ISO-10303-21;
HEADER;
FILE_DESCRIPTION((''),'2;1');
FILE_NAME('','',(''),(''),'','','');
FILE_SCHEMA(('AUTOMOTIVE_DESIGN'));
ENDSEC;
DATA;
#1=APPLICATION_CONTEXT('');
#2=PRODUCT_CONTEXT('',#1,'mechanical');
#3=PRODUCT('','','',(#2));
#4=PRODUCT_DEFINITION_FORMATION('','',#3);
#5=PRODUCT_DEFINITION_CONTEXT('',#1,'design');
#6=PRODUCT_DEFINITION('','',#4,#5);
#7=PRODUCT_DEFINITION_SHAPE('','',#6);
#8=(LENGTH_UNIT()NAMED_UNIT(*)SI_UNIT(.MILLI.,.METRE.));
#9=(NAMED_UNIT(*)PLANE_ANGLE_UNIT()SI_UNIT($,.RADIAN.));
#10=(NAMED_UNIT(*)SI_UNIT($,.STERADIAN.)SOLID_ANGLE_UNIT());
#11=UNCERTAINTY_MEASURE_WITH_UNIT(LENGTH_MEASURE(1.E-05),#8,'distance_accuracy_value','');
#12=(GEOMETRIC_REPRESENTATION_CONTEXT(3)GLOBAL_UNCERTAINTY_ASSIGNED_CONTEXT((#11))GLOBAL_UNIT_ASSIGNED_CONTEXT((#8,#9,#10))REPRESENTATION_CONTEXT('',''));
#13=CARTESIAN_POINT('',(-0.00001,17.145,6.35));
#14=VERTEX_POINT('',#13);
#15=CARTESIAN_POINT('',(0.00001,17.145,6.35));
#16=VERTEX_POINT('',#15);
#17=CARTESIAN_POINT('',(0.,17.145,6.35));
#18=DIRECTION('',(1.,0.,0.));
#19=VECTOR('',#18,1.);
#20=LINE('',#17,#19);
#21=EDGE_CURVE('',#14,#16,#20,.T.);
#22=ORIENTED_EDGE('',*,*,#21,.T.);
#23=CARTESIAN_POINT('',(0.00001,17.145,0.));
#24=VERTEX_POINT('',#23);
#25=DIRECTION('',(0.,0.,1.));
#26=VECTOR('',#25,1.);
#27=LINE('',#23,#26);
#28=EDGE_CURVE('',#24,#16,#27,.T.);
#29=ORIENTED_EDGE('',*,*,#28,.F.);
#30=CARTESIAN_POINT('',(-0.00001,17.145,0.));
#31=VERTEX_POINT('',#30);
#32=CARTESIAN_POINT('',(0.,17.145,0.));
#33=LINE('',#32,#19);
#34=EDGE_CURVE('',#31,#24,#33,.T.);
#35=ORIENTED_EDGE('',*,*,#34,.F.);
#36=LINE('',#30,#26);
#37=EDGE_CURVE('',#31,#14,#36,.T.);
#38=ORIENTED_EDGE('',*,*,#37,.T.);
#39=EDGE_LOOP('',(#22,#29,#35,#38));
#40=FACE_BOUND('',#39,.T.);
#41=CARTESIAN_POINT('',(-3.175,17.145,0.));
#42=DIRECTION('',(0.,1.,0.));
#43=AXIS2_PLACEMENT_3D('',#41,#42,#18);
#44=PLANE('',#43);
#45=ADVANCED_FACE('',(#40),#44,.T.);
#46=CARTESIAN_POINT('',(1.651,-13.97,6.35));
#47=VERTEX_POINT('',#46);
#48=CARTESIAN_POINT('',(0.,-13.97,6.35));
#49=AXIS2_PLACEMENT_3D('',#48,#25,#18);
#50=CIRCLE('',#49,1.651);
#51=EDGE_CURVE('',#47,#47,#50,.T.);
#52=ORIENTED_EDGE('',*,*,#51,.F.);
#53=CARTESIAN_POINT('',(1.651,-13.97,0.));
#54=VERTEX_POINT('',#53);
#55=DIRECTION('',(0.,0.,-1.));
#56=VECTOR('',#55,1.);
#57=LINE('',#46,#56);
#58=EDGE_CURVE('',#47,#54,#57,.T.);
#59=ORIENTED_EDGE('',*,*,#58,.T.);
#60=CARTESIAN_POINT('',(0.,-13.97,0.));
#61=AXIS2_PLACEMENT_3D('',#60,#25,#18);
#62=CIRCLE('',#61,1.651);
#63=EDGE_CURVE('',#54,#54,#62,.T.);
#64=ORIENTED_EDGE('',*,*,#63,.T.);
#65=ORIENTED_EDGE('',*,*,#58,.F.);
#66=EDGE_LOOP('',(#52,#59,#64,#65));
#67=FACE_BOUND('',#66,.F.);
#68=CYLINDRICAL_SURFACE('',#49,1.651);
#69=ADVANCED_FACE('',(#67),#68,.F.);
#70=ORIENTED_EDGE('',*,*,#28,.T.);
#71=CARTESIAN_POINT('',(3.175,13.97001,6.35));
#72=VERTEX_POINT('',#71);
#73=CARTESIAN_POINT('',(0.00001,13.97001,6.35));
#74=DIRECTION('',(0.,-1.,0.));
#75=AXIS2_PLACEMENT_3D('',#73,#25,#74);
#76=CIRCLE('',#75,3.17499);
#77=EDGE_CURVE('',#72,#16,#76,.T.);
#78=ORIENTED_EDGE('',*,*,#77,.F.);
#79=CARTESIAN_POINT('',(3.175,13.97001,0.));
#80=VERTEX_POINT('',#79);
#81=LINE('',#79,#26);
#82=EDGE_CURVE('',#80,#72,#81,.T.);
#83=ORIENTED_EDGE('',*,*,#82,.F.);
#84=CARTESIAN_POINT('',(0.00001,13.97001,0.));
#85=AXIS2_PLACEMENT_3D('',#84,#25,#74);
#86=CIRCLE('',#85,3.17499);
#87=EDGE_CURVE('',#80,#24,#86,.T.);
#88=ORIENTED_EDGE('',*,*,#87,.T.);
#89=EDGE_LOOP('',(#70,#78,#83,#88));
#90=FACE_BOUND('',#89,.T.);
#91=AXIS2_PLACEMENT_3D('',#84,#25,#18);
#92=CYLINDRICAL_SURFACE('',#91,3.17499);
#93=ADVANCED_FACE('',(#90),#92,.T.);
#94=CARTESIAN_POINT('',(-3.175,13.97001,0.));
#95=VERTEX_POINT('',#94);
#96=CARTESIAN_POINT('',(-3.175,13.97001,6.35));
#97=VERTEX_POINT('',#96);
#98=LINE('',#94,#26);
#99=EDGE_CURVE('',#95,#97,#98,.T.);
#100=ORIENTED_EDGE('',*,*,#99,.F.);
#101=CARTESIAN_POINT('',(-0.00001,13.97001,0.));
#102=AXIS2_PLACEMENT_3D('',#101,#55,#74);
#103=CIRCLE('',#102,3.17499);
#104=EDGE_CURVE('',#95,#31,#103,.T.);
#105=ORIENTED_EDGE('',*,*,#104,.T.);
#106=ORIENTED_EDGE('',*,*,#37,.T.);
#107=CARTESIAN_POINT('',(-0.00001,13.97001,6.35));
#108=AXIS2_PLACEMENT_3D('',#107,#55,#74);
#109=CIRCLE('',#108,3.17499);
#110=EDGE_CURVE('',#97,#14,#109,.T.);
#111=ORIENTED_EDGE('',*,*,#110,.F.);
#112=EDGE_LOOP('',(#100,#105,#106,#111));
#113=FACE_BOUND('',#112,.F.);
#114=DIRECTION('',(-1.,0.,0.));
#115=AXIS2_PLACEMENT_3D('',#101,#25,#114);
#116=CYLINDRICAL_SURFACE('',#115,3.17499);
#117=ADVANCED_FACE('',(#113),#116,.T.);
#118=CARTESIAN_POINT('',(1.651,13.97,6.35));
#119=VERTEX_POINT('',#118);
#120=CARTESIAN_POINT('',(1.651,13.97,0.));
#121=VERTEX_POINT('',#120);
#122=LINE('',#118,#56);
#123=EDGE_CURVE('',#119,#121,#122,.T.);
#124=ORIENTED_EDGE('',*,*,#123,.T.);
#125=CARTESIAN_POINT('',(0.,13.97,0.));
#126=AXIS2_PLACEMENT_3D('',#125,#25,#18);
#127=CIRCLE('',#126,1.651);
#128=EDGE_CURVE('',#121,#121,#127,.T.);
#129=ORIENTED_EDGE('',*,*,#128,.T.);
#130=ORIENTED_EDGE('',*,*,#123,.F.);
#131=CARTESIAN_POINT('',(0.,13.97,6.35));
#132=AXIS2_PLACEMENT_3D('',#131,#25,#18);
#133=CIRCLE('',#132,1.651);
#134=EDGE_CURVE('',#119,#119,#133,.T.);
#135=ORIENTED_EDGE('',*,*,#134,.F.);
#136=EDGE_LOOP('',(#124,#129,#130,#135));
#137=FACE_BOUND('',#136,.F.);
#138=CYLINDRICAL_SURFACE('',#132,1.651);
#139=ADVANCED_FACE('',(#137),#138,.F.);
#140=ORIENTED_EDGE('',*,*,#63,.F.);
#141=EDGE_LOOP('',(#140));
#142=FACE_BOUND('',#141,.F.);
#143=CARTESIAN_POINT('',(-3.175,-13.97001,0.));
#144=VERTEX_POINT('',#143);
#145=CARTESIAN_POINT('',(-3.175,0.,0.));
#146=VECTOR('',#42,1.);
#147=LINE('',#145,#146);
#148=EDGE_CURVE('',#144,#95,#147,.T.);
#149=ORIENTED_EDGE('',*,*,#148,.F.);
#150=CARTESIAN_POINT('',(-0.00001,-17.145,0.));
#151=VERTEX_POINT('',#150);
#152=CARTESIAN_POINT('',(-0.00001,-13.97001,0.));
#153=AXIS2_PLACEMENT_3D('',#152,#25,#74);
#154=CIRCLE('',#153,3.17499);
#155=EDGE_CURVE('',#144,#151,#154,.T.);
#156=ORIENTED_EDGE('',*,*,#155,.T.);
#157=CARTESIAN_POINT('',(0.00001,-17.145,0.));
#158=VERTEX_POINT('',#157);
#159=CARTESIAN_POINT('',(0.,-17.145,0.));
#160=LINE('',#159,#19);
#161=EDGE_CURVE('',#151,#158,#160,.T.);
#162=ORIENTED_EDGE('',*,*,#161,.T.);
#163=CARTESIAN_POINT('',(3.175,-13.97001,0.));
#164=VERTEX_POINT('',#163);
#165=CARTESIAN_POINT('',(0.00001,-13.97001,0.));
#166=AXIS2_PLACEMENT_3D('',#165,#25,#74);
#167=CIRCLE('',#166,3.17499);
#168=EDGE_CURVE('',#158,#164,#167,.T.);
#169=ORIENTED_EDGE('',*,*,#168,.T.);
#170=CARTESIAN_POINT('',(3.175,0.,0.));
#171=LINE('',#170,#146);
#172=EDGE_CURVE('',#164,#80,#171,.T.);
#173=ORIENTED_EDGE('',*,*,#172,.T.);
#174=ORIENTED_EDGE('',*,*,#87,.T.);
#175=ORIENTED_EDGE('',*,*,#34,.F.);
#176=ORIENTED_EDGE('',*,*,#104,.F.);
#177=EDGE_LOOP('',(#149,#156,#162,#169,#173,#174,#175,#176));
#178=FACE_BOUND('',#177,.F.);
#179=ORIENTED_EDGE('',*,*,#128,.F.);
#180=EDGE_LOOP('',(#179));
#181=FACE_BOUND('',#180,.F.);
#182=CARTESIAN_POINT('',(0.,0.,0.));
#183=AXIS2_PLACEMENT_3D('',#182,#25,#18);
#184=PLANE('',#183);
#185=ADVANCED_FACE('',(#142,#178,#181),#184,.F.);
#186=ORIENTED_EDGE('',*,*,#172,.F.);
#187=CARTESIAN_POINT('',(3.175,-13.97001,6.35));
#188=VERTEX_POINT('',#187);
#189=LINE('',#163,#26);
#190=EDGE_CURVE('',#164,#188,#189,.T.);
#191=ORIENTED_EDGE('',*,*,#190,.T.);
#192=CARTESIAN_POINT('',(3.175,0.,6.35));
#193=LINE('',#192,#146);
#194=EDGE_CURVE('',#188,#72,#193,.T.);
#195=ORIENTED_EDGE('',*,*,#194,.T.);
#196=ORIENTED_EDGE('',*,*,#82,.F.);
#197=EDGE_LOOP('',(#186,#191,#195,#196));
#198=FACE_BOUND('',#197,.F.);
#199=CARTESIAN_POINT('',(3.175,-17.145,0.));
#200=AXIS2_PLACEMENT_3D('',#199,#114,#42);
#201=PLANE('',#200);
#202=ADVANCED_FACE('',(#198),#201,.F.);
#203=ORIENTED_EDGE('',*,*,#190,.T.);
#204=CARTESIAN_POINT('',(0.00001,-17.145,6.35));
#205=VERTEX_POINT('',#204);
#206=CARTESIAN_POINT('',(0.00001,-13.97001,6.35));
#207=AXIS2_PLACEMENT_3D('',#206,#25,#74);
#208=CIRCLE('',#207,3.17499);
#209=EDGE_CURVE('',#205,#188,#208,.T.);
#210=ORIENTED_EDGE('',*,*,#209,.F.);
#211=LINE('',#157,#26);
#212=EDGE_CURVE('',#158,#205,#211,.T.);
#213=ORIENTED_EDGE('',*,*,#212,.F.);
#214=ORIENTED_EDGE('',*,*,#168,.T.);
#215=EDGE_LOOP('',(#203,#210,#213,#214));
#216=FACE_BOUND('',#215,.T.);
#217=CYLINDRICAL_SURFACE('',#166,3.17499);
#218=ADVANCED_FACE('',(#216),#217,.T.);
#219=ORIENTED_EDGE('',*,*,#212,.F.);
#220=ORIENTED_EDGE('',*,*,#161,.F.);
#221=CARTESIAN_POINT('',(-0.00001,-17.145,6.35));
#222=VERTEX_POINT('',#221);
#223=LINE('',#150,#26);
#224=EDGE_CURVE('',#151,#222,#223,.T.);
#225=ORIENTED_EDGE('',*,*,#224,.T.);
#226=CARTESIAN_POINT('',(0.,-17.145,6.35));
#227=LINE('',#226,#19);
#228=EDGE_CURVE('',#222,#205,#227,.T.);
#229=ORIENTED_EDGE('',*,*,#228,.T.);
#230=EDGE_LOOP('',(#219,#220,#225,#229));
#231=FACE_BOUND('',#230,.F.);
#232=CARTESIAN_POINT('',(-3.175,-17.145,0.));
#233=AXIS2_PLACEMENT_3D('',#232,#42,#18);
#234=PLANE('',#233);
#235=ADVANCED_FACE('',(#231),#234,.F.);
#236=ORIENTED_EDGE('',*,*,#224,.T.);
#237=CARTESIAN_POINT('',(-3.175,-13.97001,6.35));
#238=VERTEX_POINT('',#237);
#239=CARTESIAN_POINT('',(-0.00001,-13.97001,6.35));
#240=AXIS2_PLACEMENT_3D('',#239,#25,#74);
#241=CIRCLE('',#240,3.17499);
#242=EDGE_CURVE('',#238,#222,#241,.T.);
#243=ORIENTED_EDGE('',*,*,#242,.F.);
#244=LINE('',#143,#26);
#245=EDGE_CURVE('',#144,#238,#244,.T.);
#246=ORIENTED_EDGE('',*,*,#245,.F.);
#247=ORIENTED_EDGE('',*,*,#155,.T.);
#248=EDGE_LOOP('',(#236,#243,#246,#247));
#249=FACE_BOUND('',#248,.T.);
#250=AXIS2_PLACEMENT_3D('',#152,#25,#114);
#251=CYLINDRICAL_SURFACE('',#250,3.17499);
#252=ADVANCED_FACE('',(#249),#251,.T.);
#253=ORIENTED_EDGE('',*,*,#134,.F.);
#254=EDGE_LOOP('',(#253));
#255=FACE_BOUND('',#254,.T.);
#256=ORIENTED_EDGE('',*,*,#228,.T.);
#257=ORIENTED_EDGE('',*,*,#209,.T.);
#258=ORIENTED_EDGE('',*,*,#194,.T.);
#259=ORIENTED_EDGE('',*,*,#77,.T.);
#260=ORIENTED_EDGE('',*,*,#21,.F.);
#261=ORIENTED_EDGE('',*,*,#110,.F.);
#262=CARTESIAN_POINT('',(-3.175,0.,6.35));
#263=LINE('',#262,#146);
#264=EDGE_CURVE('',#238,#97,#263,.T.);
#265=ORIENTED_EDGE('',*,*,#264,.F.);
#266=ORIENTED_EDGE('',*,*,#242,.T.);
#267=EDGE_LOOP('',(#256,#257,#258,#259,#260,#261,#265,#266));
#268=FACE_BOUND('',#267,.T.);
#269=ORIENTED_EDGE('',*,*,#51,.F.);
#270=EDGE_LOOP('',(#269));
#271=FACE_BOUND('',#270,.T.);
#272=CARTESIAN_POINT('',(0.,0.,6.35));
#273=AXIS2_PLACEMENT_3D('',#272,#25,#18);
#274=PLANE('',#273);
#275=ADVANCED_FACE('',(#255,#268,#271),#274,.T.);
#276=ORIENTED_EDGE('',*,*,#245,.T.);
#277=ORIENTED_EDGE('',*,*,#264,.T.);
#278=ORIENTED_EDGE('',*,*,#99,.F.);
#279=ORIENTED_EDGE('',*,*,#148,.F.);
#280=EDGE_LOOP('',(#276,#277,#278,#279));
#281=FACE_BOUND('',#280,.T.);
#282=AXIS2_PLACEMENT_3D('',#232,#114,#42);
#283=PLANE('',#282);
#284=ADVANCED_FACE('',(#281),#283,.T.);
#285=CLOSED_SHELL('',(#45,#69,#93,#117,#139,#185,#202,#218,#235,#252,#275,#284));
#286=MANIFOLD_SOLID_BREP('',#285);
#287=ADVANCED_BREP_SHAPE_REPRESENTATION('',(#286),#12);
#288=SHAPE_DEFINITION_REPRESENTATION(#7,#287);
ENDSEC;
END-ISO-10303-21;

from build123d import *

# Parameters (mm, degrees)
F0_W     = 6.35
F0_H     = 34.29
F1_DEPTH = 6.35
F2_R     = 3.17499
F3_R     = 1.651
F4_DEPTH = 6.35


# Not quite as in the source:
# - a fillet or chamfer is up to 0.001 mm smaller than in the source, because OpenCascade refuses the exact size


with BuildPart() as f1:
    # F0 (on Top) → F1 (new body)
    with BuildSketch(Plane.XY):
        Rectangle(F0_W, F0_H)
    extrude(amount=F1_DEPTH)

    # F2 (radius 3.175 in the source; OpenCascade refuses exactly that, so slightly less here)
    f2_edges = [f1.edges().sort_by_distance(p)[0] for p in [
        (3.175, 17.145, 3.175),
        (-3.175, 17.145, 3.175),
        (3.175, -17.145, 3.175),
        (-3.175, -17.145, 3.175),
    ]]
    fillet(f2_edges, radius=F2_R)

    # F3 (on face) → F4 (cut, through all)
    with BuildSketch(Plane.XY.offset(6.35)):
        with Locations((0, -13.97)):
            Circle(F3_R)
        with Locations((0, 13.97)):
            Circle(F3_R)
    extrude(amount=-F4_DEPTH, mode=Mode.SUBTRACT)


solid = f1.part
